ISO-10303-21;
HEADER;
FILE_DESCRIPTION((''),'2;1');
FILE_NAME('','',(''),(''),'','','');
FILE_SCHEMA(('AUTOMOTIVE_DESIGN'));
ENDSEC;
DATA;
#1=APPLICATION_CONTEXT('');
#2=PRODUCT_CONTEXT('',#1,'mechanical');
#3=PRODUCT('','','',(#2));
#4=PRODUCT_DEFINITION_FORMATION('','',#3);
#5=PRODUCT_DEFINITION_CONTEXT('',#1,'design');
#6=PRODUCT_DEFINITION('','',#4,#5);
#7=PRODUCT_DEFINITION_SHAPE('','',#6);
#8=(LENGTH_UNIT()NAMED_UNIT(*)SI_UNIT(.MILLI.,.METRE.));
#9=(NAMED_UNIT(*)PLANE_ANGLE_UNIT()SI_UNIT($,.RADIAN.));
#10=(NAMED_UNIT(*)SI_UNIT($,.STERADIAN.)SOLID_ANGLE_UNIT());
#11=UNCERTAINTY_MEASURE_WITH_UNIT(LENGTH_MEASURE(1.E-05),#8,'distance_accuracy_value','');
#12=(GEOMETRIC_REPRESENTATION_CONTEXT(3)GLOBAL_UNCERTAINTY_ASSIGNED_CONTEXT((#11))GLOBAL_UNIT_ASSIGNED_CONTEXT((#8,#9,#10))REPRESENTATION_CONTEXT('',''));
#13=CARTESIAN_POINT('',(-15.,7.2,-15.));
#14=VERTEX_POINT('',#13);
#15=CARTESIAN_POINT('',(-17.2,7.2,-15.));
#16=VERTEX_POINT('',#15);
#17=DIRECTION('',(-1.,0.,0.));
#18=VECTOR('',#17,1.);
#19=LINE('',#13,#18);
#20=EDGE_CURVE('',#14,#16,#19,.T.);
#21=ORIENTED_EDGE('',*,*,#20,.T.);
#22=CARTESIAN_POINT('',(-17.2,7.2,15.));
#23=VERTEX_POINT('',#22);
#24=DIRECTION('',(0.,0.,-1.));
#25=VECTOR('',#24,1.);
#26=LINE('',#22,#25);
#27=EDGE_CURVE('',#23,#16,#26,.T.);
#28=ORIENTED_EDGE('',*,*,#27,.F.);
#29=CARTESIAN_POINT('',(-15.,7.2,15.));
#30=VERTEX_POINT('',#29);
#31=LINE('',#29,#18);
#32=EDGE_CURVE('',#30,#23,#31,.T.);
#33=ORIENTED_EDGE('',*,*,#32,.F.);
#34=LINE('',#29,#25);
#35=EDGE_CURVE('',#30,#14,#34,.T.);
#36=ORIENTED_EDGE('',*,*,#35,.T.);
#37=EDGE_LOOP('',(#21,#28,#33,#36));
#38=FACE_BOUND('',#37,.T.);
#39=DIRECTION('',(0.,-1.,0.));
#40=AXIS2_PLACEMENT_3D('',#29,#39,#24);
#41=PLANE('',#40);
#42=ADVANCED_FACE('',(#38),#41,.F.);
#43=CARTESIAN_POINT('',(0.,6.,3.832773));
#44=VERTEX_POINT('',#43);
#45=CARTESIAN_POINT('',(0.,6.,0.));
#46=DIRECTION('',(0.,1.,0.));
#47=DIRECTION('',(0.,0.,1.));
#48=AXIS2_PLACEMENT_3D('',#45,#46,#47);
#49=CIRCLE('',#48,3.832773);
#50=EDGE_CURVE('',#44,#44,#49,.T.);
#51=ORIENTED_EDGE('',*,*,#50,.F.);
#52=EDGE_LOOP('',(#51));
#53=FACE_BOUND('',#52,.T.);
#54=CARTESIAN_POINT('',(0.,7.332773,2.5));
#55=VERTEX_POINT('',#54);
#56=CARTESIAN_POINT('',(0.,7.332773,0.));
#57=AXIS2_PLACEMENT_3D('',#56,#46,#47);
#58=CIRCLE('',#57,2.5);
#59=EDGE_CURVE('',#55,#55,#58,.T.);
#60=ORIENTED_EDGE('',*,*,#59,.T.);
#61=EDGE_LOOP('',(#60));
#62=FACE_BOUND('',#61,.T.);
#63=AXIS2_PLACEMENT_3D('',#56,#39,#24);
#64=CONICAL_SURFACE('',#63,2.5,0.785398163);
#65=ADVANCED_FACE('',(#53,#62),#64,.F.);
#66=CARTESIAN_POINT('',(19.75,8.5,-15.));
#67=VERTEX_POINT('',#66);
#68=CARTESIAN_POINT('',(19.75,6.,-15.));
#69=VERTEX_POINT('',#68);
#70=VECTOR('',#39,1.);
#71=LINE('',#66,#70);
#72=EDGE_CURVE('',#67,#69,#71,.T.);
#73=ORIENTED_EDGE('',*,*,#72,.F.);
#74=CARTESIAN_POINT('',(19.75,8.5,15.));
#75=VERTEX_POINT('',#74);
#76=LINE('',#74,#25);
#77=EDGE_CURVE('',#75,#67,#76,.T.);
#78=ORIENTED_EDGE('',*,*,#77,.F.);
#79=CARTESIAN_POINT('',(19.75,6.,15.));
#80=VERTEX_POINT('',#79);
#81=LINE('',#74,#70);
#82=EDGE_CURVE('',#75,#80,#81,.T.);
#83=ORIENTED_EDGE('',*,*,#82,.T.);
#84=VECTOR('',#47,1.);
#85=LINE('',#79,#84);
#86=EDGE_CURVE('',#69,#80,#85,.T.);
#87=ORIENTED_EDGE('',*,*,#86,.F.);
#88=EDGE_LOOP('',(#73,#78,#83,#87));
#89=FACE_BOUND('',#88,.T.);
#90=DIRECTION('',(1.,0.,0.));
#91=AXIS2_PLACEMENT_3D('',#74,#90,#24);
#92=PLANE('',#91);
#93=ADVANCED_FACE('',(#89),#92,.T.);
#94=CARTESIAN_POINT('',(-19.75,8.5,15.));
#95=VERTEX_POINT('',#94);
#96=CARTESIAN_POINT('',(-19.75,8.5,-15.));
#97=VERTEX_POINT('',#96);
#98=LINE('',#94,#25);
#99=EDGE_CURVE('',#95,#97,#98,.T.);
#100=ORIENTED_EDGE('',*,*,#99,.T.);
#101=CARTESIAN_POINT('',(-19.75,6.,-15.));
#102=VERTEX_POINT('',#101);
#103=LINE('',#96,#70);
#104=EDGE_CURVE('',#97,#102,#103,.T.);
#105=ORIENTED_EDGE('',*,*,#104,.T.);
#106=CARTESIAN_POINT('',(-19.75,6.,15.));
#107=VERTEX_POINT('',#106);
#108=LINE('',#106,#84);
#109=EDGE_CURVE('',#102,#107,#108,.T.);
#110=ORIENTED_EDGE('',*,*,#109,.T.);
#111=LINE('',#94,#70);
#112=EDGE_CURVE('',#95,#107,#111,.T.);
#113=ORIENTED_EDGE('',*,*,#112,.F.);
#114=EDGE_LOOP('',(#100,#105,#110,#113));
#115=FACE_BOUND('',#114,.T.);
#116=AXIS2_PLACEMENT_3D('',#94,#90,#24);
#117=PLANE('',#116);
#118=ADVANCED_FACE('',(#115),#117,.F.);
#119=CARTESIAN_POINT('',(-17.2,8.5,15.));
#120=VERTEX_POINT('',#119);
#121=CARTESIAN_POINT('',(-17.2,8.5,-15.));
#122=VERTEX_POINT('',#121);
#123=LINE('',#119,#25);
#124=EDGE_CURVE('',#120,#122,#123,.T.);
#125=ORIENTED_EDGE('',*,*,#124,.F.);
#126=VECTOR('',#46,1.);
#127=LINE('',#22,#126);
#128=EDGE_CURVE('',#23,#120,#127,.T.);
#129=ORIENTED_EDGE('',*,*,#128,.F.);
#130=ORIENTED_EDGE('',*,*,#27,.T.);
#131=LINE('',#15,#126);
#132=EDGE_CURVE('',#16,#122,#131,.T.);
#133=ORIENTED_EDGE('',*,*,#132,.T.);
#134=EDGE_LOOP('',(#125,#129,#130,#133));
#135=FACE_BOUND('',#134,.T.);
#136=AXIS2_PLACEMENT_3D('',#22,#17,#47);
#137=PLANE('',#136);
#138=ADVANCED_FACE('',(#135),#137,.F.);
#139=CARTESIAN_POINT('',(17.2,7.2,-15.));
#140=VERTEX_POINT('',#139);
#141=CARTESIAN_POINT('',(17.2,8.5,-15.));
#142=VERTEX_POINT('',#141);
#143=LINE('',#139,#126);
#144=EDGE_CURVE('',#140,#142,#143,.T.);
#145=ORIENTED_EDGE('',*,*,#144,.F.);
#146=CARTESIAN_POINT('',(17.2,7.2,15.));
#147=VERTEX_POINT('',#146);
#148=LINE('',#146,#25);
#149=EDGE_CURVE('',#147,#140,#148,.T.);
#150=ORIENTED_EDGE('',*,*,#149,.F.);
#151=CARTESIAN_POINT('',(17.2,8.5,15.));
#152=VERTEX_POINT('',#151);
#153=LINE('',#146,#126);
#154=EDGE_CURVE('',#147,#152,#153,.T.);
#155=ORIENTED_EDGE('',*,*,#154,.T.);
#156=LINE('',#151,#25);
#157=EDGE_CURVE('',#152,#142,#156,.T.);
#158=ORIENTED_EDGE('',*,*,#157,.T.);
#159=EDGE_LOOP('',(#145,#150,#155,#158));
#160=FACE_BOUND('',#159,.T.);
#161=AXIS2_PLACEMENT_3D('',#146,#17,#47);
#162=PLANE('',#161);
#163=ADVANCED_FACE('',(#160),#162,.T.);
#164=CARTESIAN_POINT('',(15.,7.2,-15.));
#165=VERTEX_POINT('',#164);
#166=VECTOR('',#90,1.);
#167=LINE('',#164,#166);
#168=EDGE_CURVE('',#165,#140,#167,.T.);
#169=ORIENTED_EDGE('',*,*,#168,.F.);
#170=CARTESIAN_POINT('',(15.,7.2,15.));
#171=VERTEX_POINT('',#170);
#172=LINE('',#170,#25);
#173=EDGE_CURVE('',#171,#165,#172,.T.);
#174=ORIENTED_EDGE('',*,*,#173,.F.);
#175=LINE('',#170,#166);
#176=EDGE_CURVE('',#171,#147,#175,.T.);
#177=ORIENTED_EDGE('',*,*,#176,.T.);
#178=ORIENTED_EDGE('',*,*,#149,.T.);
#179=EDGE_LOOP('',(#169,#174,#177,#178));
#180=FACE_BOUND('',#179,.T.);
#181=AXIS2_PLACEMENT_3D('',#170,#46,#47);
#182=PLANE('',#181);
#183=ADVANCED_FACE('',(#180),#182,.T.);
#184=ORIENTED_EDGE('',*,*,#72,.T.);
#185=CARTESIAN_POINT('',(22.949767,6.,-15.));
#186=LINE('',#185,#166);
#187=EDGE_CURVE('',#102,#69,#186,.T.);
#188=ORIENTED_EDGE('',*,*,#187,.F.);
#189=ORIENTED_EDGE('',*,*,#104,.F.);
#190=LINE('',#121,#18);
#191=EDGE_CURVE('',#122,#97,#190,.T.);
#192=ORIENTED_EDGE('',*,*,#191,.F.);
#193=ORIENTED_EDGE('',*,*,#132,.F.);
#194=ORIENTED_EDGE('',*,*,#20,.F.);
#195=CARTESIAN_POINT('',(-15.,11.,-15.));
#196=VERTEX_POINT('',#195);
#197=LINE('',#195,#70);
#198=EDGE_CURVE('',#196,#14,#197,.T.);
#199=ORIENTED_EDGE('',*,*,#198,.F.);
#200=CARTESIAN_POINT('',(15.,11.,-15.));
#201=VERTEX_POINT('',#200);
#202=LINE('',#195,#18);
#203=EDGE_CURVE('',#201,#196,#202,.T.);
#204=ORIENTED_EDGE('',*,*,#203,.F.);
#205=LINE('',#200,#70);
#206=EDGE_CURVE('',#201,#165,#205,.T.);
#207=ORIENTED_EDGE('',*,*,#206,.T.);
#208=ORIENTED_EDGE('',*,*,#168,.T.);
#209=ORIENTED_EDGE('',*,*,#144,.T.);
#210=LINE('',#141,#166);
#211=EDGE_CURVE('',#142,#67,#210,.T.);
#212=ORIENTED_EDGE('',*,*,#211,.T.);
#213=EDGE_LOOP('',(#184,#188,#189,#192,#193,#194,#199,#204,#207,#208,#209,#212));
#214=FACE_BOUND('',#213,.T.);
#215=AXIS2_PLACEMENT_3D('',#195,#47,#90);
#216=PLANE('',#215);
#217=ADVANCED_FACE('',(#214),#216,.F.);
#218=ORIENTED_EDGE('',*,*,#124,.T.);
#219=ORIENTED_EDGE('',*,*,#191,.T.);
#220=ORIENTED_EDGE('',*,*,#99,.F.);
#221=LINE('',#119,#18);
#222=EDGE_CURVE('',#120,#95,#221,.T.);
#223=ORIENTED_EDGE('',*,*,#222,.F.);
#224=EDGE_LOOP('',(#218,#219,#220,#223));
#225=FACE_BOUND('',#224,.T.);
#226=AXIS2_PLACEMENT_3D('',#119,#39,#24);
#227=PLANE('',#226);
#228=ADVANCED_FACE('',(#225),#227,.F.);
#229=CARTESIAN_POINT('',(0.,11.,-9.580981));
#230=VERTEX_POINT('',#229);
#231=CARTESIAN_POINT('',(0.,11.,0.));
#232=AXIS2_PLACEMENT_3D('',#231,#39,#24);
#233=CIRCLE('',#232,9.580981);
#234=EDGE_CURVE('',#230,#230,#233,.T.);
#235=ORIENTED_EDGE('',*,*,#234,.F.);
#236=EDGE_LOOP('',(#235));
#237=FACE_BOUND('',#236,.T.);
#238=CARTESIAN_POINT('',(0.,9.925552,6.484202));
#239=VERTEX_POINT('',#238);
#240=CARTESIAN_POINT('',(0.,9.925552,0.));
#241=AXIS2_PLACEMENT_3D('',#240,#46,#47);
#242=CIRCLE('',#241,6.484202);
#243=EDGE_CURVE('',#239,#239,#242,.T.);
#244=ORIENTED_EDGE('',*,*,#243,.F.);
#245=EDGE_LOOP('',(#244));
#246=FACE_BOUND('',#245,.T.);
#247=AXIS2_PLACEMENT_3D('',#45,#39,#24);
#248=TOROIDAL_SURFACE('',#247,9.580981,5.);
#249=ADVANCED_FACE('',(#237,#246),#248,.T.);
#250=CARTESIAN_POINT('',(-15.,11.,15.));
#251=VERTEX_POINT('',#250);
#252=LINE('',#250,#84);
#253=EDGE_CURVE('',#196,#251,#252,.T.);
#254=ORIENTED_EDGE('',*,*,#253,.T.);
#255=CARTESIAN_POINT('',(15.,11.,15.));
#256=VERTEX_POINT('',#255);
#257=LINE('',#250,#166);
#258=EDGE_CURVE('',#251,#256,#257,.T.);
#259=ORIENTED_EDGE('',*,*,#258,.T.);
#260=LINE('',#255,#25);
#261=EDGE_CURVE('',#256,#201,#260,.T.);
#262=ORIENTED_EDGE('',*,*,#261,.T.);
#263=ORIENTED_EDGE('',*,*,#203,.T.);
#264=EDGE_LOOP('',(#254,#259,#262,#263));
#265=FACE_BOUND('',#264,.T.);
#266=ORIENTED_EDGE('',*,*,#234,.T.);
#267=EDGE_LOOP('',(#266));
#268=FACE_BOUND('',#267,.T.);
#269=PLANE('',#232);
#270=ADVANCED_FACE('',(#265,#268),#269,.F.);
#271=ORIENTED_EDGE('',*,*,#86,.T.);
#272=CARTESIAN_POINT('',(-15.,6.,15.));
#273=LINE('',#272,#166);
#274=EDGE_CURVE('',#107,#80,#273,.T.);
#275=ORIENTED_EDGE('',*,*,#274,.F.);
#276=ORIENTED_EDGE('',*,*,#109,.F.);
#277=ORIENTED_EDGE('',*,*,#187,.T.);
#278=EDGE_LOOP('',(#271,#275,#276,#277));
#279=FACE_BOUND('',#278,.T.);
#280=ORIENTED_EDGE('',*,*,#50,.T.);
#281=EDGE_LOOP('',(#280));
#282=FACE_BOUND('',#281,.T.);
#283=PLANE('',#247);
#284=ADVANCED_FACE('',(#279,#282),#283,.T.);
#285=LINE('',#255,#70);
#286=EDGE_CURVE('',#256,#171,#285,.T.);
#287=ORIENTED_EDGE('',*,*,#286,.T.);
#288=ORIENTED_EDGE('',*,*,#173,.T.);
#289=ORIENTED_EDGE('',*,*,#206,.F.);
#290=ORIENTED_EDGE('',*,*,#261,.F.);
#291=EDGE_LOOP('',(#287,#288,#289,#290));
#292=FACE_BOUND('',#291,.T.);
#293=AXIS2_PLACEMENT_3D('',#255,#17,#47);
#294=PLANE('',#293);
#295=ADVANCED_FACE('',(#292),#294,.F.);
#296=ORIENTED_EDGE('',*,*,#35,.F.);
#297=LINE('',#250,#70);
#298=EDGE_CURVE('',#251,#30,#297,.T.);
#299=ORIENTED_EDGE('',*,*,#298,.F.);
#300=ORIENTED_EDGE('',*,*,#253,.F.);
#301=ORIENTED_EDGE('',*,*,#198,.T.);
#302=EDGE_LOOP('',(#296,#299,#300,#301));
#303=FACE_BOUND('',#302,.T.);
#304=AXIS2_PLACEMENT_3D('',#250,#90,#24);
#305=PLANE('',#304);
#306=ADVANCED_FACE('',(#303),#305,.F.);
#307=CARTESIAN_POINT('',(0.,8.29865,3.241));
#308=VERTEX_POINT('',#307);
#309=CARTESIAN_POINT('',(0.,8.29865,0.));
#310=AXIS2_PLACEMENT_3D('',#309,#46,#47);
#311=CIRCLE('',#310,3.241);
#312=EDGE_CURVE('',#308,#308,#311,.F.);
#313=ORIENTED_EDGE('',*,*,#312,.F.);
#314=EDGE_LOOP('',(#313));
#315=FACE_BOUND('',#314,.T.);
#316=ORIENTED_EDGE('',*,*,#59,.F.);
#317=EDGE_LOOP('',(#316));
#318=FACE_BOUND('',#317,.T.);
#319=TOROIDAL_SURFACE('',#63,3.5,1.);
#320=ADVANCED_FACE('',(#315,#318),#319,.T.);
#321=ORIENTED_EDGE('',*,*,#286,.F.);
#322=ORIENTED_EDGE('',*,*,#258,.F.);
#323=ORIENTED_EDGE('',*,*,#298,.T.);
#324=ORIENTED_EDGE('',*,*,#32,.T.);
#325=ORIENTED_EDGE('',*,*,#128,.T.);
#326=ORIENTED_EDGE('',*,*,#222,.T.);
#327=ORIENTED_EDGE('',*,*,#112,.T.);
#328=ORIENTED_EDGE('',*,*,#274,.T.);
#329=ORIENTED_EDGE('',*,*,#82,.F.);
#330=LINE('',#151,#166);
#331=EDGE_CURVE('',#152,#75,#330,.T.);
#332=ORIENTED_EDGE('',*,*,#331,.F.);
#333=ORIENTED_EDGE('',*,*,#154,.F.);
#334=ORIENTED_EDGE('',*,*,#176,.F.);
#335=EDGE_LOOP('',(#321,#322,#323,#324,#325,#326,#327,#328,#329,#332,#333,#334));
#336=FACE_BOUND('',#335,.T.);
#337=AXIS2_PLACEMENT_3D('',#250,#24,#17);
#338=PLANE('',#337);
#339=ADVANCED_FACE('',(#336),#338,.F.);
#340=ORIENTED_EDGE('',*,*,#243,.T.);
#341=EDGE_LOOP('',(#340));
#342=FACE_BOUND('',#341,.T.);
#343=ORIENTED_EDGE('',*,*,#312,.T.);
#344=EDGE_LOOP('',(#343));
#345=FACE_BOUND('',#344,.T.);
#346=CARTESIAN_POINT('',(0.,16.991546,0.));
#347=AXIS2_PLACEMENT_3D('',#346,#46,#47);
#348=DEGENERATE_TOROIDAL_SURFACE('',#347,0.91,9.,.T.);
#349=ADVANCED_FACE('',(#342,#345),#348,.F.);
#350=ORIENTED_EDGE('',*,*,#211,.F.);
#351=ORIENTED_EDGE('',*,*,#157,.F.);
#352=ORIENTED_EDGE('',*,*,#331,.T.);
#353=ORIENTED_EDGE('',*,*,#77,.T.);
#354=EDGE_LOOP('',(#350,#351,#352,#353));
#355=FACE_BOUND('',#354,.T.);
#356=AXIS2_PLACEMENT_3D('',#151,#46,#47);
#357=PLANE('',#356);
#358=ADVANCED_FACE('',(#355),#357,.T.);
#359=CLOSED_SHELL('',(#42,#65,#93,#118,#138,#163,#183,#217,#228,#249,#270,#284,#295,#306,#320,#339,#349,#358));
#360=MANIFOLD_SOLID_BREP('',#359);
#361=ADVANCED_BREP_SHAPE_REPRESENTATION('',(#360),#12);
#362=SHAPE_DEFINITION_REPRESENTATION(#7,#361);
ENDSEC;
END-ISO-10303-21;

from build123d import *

# Parameters (mm, degrees)
SKETCH1_W               = 30
SKETCH1_H               = 30
MAIN_BODY_DEPTH         = 11
SKETCH2_W               = 17.84
SKETCH2_H               = 2.8
WIRE_HOLE_DEPTH         = 6
BOARD_CAVITY_DEPTH      = 3
BOARD_CAVITY_DEPTH_BACK = 17.2
SKETCH3_W               = 20.5
SKETCH3_H               = 3.6
SKETCH4_W               = 10
SKETCH4_H               = 10
LIGHT_BOX_DEPTH         = 2
SKETCH5_R               = 2.5
CUT_EXTRUDE4_DEPTH      = 5
SKETCH7_W               = 20.5
SKETCH7_H               = 3.6
CUT_EXTRUDE5_DEPTH      = 1
BOSS_EXTRUDE1_DEPTH     = 30
BOSS_EXTRUDE2_START     = 2
SKETCH11_W              = 10
SKETCH11_H              = 10
SKETCH11_R              = 2.5
BOSS_EXTRUDE2_DEPTH     = 2
SKETCH12_W              = 44.564275197
SKETCH12_H              = 6
CUT_EXTRUDE6_DEPTH      = 40
FILLET1_R               = 5
FILLET2_R               = 1


with BuildPart() as part:
    # Sketch1 → Main Body (new body)
    with BuildSketch(Plane(origin=(0, 0, 0), x_dir=(1, 0, 0), z_dir=(0, 1, 0))):
        Rectangle(SKETCH1_W, SKETCH1_H)
    extrude(amount=MAIN_BODY_DEPTH)

    # Sketch2 → Wire Hole (cut)
    with BuildSketch(Plane.XZ):
        with Locations((0, 8.6)):
            Rectangle(SKETCH2_W, SKETCH2_H)
    extrude(amount=-WIRE_HOLE_DEPTH, mode=Mode.SUBTRACT)

    # Sketch3 → Board Cavity (cut, two sides: drawn at the far end of the back side and taken through both)
    with BuildSketch(Plane.XY.offset(7.2).offset(-BOARD_CAVITY_DEPTH_BACK)):
        with Locations((0, 4.2)):
            Rectangle(SKETCH3_W, SKETCH3_H)
    extrude(amount=BOARD_CAVITY_DEPTH + BOARD_CAVITY_DEPTH_BACK, mode=Mode.SUBTRACT)

    # Sketch4 → Light Box (cut)
    with BuildSketch(Plane.XZ.offset(-6)):
        with Locations((0, 0.05)):
            Rectangle(SKETCH4_W, SKETCH4_H)
    extrude(amount=-LIGHT_BOX_DEPTH, mode=Mode.SUBTRACT)

    # Sketch5 → Cut-Extrude4 (cut)
    with BuildSketch(Plane.XZ.offset(-8)):
        Circle(SKETCH5_R)
    extrude(amount=-CUT_EXTRUDE4_DEPTH, mode=Mode.SUBTRACT)

    # Sketch7 → Cut-Extrude5 (cut)
    with BuildSketch(Plane.XY.offset(-10)):
        with Locations((0, 4.2)):
            Rectangle(SKETCH7_W, SKETCH7_H)
    extrude(amount=-CUT_EXTRUDE5_DEPTH, mode=Mode.SUBTRACT)

    # Sketch8 → Boss-Extrude1 (add)
    with BuildSketch(Plane(origin=(0, 0, -15), x_dir=(-1, 0, 0), z_dir=(0, 0, -1))):
        Polygon((-15, 5.5), (-15, 3.8), (-17.2, 3.8), (-17.2, 2.5), (-19.75, 2.5), (-19.75, 8.5), (-17.2, 8.5), (-17.2, 7.2), (-15, 7.2), align=None)
    boss_extrude1 = extrude(amount=-BOSS_EXTRUDE1_DEPTH)

    # Mirror1: Boss-Extrude1 across plane
    add(boss_extrude1.mirror(Plane(origin=(0, 0, 0), x_dir=(0, 0, 1), z_dir=(1, 0, 0))))

    # Sketch9 → Cut-Revolve6 (revolve, cut)
    with BuildSketch(Plane.XY):
        with BuildLine():
            Line((-0.715, 25.989433281), (-0.715, 8))
            Line((-0.715, 8), (-1.3, 8))
            ThreePointArc((-1.3, 8), (-9.90524506, 17.284063213), (-0.715, 25.989433281))
        make_face()
    revolve(axis=Axis((0, 0, 0), (0, -1, 0)), mode=Mode.SUBTRACT)

    # Sketch11 → Boss-Extrude2 (add)
    with BuildSketch(Plane.XZ.offset(-8).offset(BOSS_EXTRUDE2_START)):
        with Locations((0, 0.05)):
            Rectangle(SKETCH11_W, SKETCH11_H)
        Circle(SKETCH11_R, mode=Mode.SUBTRACT)
    extrude(amount=-BOSS_EXTRUDE2_DEPTH)

    # Sketch12 → Cut-Extrude6 (cut)
    with BuildSketch(Plane(origin=(0, 0, -15), x_dir=(-1, 0, 0), z_dir=(0, 0, -1))):
        with Locations((-0.667629591, 3)):
            Rectangle(SKETCH12_W, SKETCH12_H)
    extrude(amount=-CUT_EXTRUDE6_DEPTH, mode=Mode.SUBTRACT)

    # Fillet1
    fillet1_edges = [part.edges().sort_by_distance(p)[0] for p in [
        (7.625755817, 11, -5e-09),
    ]]
    fillet(fillet1_edges, radius=FILLET1_R)

    # Fillet2
    fillet2_edges = [part.edges().sort_by_distance(p)[0] for p in [
        (0, 8.133109373, 2.499999983),
    ]]
    fillet(fillet2_edges, radius=FILLET2_R)

    # Sketch13 → Cut-Revolve7 (revolve, cut)
    with BuildSketch(Plane.XY):
        Polygon((-2.5, 7.332772815), (-3.832772815, 6), (0, 6), (0, 7.332772815), align=None)
    revolve(axis=Axis((0, 0, 0), (0, -1, 0)), mode=Mode.SUBTRACT)


solid = part.part
